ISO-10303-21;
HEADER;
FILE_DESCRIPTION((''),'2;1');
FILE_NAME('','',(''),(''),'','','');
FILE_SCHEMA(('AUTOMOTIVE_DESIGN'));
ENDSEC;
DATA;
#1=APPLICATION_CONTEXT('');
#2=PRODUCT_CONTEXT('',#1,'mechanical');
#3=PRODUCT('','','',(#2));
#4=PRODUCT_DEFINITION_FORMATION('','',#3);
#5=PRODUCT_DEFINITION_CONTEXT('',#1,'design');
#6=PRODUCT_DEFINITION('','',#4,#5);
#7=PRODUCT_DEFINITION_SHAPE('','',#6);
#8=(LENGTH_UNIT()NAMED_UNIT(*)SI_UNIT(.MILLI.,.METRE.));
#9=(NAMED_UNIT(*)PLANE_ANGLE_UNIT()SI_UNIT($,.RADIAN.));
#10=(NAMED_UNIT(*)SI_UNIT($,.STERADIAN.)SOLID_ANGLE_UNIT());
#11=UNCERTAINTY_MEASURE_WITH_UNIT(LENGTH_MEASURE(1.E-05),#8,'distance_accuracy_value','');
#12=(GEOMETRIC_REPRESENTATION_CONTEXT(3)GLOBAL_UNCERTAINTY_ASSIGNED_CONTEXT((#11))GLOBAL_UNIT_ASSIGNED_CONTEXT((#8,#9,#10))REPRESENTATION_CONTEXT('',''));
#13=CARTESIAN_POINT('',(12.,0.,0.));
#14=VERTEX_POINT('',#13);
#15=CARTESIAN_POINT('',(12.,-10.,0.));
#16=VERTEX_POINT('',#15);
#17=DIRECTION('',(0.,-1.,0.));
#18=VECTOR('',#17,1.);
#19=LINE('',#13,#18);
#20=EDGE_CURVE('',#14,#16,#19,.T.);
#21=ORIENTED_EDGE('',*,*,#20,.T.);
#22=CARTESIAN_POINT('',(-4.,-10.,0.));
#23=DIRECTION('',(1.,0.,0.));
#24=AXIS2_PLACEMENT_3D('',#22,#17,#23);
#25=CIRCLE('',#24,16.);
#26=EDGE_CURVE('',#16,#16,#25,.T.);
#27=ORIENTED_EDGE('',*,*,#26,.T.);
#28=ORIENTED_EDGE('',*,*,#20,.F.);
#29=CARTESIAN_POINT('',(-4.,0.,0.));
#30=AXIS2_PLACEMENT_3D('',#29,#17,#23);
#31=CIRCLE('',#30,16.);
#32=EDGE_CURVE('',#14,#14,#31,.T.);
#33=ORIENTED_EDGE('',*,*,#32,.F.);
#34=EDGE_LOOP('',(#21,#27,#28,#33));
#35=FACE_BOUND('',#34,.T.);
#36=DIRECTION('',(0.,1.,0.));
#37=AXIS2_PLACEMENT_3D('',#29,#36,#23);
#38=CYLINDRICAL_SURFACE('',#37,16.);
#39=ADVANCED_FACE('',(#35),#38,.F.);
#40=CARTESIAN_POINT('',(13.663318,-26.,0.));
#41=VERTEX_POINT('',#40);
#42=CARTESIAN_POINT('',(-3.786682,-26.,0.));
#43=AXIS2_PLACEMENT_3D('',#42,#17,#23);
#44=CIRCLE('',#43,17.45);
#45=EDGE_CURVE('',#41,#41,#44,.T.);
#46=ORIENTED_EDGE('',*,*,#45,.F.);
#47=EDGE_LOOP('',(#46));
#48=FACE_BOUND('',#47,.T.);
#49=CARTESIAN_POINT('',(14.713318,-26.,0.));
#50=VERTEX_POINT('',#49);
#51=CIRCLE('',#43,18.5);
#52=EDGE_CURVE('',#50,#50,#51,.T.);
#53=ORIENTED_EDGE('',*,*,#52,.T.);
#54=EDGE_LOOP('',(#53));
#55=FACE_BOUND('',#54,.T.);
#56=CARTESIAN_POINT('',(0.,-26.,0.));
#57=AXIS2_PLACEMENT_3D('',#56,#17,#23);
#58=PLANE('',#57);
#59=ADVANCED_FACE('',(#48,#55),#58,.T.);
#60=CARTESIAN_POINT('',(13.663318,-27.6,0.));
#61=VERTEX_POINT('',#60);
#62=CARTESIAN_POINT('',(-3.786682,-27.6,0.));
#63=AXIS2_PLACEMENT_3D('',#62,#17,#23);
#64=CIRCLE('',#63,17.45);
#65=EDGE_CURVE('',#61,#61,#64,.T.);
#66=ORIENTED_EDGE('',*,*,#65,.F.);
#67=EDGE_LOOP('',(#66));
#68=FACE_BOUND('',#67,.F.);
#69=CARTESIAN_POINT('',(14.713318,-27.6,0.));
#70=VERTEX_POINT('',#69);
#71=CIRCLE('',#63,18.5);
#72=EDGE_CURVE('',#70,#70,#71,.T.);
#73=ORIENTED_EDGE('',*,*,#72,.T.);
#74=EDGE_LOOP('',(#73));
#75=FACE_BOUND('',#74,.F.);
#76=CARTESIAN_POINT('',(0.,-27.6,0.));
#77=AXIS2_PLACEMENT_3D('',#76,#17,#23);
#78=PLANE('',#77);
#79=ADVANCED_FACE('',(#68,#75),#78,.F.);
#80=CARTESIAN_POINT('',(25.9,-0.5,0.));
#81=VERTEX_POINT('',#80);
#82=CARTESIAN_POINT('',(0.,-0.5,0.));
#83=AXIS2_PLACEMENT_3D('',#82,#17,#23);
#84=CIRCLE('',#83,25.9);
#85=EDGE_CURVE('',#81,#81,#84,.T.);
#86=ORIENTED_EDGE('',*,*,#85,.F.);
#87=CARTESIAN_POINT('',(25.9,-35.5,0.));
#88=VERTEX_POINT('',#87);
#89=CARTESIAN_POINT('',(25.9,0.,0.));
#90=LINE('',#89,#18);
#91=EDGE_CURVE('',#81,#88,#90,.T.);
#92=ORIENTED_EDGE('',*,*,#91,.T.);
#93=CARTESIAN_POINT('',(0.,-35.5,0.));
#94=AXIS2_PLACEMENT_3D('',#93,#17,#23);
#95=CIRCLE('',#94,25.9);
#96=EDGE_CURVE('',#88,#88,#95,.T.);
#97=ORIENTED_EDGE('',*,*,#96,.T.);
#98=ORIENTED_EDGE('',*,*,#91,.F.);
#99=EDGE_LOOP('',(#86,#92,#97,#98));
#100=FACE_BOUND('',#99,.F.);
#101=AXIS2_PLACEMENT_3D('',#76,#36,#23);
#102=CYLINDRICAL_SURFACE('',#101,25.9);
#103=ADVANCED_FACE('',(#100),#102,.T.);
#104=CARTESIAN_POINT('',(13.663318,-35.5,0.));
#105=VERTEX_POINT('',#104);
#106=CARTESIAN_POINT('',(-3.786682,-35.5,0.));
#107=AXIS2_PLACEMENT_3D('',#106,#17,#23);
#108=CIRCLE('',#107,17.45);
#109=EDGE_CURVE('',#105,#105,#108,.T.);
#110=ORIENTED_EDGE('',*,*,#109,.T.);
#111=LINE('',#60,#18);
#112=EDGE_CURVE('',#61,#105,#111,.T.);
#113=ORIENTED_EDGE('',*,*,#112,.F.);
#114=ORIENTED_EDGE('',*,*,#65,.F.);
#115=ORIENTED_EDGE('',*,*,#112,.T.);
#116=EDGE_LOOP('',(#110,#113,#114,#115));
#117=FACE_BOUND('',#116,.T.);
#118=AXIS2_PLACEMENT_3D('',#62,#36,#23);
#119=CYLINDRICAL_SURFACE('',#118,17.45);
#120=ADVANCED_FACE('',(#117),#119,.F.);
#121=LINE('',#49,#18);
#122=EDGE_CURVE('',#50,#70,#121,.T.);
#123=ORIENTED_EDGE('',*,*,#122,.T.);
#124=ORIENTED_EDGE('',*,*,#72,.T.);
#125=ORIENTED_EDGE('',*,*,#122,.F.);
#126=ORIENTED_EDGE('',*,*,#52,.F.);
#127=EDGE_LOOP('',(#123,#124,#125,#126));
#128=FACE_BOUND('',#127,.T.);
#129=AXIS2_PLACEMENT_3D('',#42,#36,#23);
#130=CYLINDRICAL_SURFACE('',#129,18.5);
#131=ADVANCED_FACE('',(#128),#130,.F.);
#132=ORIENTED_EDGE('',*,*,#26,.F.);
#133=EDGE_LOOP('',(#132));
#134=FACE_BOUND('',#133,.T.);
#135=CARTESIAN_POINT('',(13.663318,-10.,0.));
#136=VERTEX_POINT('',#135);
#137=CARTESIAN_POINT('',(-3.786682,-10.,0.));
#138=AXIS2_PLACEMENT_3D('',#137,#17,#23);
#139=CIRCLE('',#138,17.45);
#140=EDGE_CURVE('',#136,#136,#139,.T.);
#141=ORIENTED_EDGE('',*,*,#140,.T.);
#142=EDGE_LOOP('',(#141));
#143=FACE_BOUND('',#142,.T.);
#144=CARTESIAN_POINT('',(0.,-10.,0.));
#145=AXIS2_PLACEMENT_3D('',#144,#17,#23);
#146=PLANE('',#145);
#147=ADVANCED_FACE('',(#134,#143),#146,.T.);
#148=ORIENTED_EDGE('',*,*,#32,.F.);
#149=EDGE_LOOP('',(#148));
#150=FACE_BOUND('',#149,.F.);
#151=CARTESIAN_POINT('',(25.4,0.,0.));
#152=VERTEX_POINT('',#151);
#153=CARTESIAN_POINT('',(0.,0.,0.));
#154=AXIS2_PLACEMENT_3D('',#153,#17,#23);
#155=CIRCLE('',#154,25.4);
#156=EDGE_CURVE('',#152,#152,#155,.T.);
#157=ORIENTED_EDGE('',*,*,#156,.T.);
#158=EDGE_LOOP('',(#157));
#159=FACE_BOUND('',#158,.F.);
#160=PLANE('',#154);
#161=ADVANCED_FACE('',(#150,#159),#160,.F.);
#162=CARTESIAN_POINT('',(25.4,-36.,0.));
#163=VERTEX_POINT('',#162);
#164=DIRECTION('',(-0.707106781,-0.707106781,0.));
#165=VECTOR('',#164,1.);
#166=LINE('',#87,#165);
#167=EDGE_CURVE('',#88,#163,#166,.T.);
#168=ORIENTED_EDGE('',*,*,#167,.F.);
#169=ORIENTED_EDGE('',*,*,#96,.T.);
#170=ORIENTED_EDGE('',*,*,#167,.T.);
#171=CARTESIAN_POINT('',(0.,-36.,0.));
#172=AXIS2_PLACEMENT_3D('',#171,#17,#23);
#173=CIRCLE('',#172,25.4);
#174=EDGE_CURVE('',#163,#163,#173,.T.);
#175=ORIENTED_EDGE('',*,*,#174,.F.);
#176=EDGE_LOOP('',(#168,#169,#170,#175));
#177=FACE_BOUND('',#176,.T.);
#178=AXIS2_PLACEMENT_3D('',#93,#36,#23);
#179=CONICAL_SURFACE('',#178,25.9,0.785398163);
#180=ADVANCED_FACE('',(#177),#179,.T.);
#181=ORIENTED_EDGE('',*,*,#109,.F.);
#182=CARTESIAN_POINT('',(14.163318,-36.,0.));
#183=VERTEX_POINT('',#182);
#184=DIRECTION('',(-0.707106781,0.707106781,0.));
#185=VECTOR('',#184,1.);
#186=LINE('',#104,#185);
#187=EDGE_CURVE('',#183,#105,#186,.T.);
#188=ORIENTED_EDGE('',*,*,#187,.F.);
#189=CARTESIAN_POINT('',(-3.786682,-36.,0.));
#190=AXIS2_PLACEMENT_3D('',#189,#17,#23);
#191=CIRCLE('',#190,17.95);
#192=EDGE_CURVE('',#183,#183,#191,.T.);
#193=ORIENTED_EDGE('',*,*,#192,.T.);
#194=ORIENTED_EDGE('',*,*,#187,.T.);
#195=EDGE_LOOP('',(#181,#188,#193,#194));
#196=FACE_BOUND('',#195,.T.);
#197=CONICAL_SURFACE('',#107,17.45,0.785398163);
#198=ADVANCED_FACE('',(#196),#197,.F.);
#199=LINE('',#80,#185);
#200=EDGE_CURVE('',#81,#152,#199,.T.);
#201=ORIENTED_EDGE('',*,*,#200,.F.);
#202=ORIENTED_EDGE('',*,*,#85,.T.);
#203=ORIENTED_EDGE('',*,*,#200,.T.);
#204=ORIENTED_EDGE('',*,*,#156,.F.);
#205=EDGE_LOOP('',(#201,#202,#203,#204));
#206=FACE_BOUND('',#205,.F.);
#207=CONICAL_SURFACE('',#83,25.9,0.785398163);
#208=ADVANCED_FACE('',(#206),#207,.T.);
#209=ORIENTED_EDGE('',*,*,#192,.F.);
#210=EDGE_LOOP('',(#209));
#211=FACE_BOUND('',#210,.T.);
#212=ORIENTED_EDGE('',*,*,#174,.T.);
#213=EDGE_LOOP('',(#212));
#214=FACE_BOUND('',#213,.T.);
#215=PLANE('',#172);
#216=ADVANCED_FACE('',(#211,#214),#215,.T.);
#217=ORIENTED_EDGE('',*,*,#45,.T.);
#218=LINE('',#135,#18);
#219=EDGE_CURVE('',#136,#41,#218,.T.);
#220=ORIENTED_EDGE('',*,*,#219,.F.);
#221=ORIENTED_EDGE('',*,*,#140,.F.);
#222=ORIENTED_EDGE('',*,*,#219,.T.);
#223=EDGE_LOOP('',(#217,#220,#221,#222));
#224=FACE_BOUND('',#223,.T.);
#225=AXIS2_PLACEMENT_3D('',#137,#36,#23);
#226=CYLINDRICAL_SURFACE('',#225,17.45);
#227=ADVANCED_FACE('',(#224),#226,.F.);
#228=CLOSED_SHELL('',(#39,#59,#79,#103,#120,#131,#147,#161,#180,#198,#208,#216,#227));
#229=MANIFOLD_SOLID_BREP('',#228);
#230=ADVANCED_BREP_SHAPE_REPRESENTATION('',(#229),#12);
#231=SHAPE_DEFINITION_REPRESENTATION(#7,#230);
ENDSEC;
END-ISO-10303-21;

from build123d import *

# Parameters (mm, degrees)
F0_R     = 25.9
F0_R_2   = 16
F1_DEPTH = 10
F3_R     = 25.9
F3_R_2   = 17.45
F4_DEPTH = 16
F5_R     = 25.9
F5_R_2   = 18.5
F6_DEPTH = 1.6
F7_R     = 25.9
F7_R_2   = 18.5
F7_R_3   = 17.45
F8_DEPTH = 8.4
F9_SIZE  = 0.5
F10_SIZE = 0.5
F11_SIZE = 0.5


# Not quite as in the source:
# - a feature names something its author has since deleted; it is built from what else it names


with BuildPart() as f1:
    # F0 (on Front) → F1 (new body)
    with BuildSketch(Plane.XZ):
        Circle(F0_R)
        with Locations((-4, 0)):
            Circle(F0_R_2, mode=Mode.SUBTRACT)
    extrude(amount=F1_DEPTH)

    # F3 (on face) → F4 (join)
    with BuildSketch(Plane.XZ.offset(10)):
        Circle(F3_R)
        with Locations((-3.7866821816, 0)):
            Circle(F3_R_2, mode=Mode.SUBTRACT)
    extrude(amount=F4_DEPTH)

    # F5 (on face) → F6 (join)
    with BuildSketch(Plane.XZ.offset(26)):
        Circle(F5_R)
        with Locations((-3.7866821816, 0)):
            Circle(F5_R_2, mode=Mode.SUBTRACT)
    extrude(amount=F6_DEPTH)

    # F7 (on face) → F8 (join)
    with BuildSketch(Plane.XZ.offset(27.6)):
        Circle(F7_R)
        with Locations((-3.7866821816, 0)):
            Circle(F7_R_2, mode=Mode.SUBTRACT)
        with Locations((-3.7866821816, 0)):
            Circle(F7_R_2)
        with Locations((-3.7866821816, 0)):
            Circle(F7_R_3, mode=Mode.SUBTRACT)
    extrude(amount=F8_DEPTH)

    # F9
    f9_edges = [f1.edges().sort_by_distance(p)[0] for p in [
        (-25.9, 0, 0),
    ]]
    chamfer(f9_edges, length=F9_SIZE)

    # F10
    f10_edges = [f1.edges().sort_by_distance(p)[0] for p in [
        (-25.9, -36, 0),
    ]]
    chamfer(f10_edges, length=F10_SIZE)

    # F11
    f11_edges = [f1.edges().sort_by_distance(p)[0] for p in [
        (-21.236682, -36, 0),
    ]]
    chamfer(f11_edges, length=F11_SIZE)


solid = f1.part
